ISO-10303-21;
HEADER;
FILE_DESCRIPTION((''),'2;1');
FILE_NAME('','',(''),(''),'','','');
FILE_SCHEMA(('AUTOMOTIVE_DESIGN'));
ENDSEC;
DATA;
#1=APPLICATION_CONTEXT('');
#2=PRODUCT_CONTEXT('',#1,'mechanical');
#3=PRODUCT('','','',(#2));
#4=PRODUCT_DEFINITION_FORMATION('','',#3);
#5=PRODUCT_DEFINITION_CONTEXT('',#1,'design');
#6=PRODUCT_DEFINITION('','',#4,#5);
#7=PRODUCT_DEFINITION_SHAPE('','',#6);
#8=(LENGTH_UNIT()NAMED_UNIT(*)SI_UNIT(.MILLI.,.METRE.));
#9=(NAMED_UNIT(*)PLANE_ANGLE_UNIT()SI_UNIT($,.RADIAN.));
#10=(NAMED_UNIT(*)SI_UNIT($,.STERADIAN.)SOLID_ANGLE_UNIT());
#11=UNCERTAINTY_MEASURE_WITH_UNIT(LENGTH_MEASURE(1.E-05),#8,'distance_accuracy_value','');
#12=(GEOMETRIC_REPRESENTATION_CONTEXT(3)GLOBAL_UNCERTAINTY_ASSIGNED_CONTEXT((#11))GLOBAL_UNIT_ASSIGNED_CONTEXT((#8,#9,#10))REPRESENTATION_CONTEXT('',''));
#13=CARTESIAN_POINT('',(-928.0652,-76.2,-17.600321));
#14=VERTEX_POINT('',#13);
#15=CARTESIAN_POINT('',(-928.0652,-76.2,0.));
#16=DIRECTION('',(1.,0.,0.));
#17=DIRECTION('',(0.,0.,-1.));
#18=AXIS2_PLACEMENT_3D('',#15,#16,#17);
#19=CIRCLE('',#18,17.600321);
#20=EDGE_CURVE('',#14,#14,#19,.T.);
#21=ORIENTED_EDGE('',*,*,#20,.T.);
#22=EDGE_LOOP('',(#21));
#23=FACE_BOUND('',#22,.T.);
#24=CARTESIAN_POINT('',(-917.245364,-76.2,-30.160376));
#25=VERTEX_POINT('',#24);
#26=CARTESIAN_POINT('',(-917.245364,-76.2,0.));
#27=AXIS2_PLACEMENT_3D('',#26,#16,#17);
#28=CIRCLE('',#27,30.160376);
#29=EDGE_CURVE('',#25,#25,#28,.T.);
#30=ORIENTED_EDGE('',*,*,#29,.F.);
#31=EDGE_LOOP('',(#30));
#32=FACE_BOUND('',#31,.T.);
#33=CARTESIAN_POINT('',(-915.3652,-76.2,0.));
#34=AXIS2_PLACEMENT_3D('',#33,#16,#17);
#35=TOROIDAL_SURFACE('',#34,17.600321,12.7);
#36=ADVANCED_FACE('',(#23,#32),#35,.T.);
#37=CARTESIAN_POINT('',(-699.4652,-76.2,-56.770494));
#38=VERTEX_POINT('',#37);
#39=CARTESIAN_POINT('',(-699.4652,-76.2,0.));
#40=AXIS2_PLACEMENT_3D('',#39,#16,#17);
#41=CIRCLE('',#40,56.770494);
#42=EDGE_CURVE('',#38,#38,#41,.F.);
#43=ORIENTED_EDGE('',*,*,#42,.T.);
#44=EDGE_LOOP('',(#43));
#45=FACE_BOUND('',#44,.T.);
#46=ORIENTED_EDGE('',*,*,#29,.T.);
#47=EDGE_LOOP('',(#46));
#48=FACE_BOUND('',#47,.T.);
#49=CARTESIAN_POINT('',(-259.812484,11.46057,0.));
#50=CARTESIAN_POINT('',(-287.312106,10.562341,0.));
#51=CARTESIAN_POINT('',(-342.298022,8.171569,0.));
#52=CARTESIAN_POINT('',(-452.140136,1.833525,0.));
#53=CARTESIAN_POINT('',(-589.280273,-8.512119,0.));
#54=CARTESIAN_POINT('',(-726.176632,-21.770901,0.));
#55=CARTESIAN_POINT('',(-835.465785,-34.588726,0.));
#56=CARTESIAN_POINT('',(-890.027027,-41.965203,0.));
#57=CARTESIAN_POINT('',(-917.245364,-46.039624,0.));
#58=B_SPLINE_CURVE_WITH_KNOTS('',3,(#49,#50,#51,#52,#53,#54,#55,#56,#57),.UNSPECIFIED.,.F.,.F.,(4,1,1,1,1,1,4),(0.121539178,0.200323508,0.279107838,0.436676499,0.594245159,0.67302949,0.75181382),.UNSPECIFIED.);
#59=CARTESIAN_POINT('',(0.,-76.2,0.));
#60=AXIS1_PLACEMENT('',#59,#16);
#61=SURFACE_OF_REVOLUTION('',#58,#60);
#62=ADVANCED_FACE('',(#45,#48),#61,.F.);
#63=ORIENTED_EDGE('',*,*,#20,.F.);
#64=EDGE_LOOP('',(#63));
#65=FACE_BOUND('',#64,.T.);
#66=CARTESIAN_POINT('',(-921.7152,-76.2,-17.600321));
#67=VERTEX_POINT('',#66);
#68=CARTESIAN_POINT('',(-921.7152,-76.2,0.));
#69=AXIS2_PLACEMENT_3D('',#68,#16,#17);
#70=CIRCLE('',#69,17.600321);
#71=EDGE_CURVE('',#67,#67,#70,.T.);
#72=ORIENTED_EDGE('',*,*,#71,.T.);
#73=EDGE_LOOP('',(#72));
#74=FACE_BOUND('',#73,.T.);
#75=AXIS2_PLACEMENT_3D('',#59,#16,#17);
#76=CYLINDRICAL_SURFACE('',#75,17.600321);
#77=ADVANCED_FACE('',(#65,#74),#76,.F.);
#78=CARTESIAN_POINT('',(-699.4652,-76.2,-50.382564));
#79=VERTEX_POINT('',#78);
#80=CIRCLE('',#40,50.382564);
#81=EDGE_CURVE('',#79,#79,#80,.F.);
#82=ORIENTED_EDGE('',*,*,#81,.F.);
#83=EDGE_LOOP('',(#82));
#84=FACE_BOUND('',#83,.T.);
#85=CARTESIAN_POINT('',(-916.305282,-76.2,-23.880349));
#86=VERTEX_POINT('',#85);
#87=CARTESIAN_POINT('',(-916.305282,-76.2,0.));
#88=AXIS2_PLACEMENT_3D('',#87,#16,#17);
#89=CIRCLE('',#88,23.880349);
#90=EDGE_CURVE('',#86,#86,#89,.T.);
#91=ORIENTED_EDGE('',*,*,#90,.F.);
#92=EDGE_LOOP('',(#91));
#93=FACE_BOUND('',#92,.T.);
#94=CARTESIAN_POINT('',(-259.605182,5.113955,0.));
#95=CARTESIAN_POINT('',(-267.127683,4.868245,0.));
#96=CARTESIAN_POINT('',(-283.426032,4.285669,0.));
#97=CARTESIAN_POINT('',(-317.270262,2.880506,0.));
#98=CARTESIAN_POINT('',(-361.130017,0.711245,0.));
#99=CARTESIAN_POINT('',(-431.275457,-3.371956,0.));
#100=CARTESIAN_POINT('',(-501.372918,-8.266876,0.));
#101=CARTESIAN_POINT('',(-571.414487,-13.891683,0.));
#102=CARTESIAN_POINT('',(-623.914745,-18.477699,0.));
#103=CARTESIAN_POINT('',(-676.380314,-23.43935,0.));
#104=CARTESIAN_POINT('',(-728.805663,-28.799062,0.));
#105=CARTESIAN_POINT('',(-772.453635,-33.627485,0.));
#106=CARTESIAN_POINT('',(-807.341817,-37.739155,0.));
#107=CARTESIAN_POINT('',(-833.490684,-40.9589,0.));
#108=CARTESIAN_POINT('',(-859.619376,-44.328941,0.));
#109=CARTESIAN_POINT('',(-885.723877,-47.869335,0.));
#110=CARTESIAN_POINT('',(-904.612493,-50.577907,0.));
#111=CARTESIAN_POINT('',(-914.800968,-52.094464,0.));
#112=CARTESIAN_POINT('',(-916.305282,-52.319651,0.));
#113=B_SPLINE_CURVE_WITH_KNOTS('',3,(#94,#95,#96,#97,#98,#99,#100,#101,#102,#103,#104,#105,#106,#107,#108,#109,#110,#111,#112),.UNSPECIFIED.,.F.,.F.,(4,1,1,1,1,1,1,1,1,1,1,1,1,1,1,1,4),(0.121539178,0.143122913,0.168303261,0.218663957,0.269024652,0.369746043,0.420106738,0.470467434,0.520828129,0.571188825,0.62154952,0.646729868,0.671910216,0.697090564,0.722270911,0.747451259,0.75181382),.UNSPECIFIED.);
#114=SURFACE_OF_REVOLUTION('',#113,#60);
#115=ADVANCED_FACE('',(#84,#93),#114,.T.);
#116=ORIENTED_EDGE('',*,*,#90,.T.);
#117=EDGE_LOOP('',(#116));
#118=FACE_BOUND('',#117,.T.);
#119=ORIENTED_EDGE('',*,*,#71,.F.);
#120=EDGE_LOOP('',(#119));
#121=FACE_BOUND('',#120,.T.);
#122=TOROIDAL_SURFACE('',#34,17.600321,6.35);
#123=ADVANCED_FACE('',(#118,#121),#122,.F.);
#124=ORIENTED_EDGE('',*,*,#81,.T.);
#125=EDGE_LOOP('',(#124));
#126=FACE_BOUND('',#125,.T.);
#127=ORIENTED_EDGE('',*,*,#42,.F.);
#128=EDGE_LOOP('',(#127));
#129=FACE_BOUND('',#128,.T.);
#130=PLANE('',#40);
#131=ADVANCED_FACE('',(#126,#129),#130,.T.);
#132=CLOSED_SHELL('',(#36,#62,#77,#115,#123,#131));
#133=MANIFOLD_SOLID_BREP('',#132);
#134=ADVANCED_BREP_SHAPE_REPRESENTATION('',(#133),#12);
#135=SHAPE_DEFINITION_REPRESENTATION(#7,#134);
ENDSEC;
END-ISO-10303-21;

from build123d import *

# Parameters (mm, degrees)
SKETCH8_R          = 142.345864783
CUT_EXTRUDE4_DEPTH = 524.976683945
SKETCH9_R          = 2.286
CUT_EXTRUDE5_DEPTH = 10.16
SKETCH11_R         = 97.880426188
CUT_EXTRUDE7_DEPTH = 314.719746547


with BuildPart() as part:
    # Sketch1 → Revolve1 (revolve)
    with BuildSketch(Plane.XY):
        with BuildLine():
            Line((6.35, 11.460570284), (-259.812483715, 11.460570284))
            add(Edge.make_bspline(
                [(-259.812483715, 11.460570284), (-287.31210638, 10.562340852), (-342.298022137, 8.171569009), (-452.140135716, 1.833524736), (-589.280273052, -8.512118808), (-726.176632388, -21.770900754), (-835.465785428, -34.58872614), (-890.027026607, -41.965202762), (-917.245364413, -46.039623622)],
                knots=[0.121539178, 0.121539178, 0.121539178, 0.121539178, 0.200323508, 0.279107838, 0.436676499, 0.594245159, 0.67302949, 0.75181382, 0.75181382, 0.75181382, 0.75181382], degree=3))
            ThreePointArc((-917.245364413, -46.039623622), (-924.987260279, -50.310773033), (-928.0652, -58.599678629))
            Line((-928.0652, -58.599678629), (-921.7152, -58.599678629))
            ThreePointArc((-921.7152, -58.599678629), (-920.17623014, -54.455225831), (-916.305282206, -52.319651125))
            add(Edge.make_bspline(
                [(-259.605182082, 5.113954963), (-267.127682546, 4.868244998), (-283.42603151, 4.285669281), (-317.270262329, 2.880505646), (-361.130016616, 0.711244662), (-431.275457269, -3.371956494), (-501.372917975, -8.266876273), (-571.414486843, -13.891682648), (-623.914744737, -18.477698889), (-676.380314027, -23.439349795), (-728.80566324, -28.799062072), (-772.453634614, -33.627485173), (-807.34181653, -37.739154543), (-833.490683911, -40.958900147), (-859.619375692, -44.328941115), (-885.723877265, -47.869335132), (-904.612492975, -50.577906922), (-914.800968172, -52.094464395), (-916.305282206, -52.319651125)],
                knots=[0.121539178, 0.121539178, 0.121539178, 0.121539178, 0.143122913, 0.168303261, 0.218663957, 0.269024652, 0.369746043, 0.420106738, 0.470467434, 0.520828129, 0.571188825, 0.62154952, 0.646729868, 0.671910216, 0.697090564, 0.722270911, 0.747451259, 0.75181382, 0.75181382, 0.75181382, 0.75181382], degree=3))
            ThreePointArc((-259.605182082, 5.113954963), (-256.399753184, 4.364993874), (-254, 2.11179575))
            ThreePointArc((-254, 2.11179575), (-251.60858665, -0.136927523), (-248.413737762, -0.890953221))
            add(Edge.make_bspline(
                [(0, 0), (-50.8, 0), (-101.6, 0), (-157.182375328, 0), (-166.747125983, 0), (-181.094251966, 0), (-190.659002621, 0), (-199.585120865, 0), (-207.872606698, 0), (-220.304800851, -0.154959839), (-228.589711976, -0.361524821), (-235.094659099, -0.523710542), (-239.819642219, -0.641517002), (-245.046645359, -0.791480258), (-247.911294959, -0.876040976), (-248.413737762, -0.890953221)],
                knots=[0.761574077, 0.761574077, 0.761574077, 0.761574077, 0.907841521, 0.907841521, 0.921611321, 0.935381121, 0.94915092, 0.94915092, 0.961081918, 0.973012916, 0.984943914, 0.984943914, 0.991748303, 0.998552693, 1, 1, 1, 1], degree=3))
            Line((0, 0), (6.35, 0))
            Line((6.35, 0), (6.35, 11.460570284))
        make_face()
    revolve(axis=Axis((0, -76.2, 0), (-1, 0, 0)))

    # Sketch8 → Cut-Extrude4 (cut, through all)
    with BuildSketch(Plane(origin=(-438.15, 0, 0), x_dir=(0, 0, -1), z_dir=(1, 0, 0))):
        with Locations((0, -76.2)):
            Circle(SKETCH8_R)
    extrude(amount=CUT_EXTRUDE4_DEPTH, mode=Mode.SUBTRACT)

    # Sketch9 → Cut-Extrude5 (cut)
    with BuildSketch(Plane(origin=(-438.15, 0, 0), x_dir=(0, 0, -1), z_dir=(1, 0, 0))):
        with Locations((23.926020811, -4.692661383)):
            Circle(SKETCH9_R)
        with Locations((61.387516514, -32.412710015)):
            Circle(SKETCH9_R)
        with Locations((75.401067393, -76.858015146)):
            Circle(SKETCH9_R)
        with Locations((60.613973316, -121.051980857)):
            Circle(SKETCH9_R)
        with Locations((22.674401626, -148.114014343)):
            Circle(SKETCH9_R)
        with Locations((-23.926020811, -147.707338617)):
            Circle(SKETCH9_R)
        with Locations((-61.387516514, -119.987289985)):
            Circle(SKETCH9_R)
        with Locations((-75.401067393, -75.541984854)):
            Circle(SKETCH9_R)
        with Locations((-60.613973316, -31.348019143)):
            Circle(SKETCH9_R)
        with Locations((-22.674401626, -4.285985657)):
            Circle(SKETCH9_R)
    extrude(amount=-CUT_EXTRUDE5_DEPTH, mode=Mode.SUBTRACT)

    # Sketch11 → Cut-Extrude7 (cut, through all)
    with BuildSketch(Plane(origin=(-699.4652, 0, 0), x_dir=(0, 0, -1), z_dir=(1, 0, 0))):
        with Locations((0, -76.2)):
            Circle(SKETCH11_R)
    extrude(amount=CUT_EXTRUDE7_DEPTH, mode=Mode.SUBTRACT)


solid = part.part
